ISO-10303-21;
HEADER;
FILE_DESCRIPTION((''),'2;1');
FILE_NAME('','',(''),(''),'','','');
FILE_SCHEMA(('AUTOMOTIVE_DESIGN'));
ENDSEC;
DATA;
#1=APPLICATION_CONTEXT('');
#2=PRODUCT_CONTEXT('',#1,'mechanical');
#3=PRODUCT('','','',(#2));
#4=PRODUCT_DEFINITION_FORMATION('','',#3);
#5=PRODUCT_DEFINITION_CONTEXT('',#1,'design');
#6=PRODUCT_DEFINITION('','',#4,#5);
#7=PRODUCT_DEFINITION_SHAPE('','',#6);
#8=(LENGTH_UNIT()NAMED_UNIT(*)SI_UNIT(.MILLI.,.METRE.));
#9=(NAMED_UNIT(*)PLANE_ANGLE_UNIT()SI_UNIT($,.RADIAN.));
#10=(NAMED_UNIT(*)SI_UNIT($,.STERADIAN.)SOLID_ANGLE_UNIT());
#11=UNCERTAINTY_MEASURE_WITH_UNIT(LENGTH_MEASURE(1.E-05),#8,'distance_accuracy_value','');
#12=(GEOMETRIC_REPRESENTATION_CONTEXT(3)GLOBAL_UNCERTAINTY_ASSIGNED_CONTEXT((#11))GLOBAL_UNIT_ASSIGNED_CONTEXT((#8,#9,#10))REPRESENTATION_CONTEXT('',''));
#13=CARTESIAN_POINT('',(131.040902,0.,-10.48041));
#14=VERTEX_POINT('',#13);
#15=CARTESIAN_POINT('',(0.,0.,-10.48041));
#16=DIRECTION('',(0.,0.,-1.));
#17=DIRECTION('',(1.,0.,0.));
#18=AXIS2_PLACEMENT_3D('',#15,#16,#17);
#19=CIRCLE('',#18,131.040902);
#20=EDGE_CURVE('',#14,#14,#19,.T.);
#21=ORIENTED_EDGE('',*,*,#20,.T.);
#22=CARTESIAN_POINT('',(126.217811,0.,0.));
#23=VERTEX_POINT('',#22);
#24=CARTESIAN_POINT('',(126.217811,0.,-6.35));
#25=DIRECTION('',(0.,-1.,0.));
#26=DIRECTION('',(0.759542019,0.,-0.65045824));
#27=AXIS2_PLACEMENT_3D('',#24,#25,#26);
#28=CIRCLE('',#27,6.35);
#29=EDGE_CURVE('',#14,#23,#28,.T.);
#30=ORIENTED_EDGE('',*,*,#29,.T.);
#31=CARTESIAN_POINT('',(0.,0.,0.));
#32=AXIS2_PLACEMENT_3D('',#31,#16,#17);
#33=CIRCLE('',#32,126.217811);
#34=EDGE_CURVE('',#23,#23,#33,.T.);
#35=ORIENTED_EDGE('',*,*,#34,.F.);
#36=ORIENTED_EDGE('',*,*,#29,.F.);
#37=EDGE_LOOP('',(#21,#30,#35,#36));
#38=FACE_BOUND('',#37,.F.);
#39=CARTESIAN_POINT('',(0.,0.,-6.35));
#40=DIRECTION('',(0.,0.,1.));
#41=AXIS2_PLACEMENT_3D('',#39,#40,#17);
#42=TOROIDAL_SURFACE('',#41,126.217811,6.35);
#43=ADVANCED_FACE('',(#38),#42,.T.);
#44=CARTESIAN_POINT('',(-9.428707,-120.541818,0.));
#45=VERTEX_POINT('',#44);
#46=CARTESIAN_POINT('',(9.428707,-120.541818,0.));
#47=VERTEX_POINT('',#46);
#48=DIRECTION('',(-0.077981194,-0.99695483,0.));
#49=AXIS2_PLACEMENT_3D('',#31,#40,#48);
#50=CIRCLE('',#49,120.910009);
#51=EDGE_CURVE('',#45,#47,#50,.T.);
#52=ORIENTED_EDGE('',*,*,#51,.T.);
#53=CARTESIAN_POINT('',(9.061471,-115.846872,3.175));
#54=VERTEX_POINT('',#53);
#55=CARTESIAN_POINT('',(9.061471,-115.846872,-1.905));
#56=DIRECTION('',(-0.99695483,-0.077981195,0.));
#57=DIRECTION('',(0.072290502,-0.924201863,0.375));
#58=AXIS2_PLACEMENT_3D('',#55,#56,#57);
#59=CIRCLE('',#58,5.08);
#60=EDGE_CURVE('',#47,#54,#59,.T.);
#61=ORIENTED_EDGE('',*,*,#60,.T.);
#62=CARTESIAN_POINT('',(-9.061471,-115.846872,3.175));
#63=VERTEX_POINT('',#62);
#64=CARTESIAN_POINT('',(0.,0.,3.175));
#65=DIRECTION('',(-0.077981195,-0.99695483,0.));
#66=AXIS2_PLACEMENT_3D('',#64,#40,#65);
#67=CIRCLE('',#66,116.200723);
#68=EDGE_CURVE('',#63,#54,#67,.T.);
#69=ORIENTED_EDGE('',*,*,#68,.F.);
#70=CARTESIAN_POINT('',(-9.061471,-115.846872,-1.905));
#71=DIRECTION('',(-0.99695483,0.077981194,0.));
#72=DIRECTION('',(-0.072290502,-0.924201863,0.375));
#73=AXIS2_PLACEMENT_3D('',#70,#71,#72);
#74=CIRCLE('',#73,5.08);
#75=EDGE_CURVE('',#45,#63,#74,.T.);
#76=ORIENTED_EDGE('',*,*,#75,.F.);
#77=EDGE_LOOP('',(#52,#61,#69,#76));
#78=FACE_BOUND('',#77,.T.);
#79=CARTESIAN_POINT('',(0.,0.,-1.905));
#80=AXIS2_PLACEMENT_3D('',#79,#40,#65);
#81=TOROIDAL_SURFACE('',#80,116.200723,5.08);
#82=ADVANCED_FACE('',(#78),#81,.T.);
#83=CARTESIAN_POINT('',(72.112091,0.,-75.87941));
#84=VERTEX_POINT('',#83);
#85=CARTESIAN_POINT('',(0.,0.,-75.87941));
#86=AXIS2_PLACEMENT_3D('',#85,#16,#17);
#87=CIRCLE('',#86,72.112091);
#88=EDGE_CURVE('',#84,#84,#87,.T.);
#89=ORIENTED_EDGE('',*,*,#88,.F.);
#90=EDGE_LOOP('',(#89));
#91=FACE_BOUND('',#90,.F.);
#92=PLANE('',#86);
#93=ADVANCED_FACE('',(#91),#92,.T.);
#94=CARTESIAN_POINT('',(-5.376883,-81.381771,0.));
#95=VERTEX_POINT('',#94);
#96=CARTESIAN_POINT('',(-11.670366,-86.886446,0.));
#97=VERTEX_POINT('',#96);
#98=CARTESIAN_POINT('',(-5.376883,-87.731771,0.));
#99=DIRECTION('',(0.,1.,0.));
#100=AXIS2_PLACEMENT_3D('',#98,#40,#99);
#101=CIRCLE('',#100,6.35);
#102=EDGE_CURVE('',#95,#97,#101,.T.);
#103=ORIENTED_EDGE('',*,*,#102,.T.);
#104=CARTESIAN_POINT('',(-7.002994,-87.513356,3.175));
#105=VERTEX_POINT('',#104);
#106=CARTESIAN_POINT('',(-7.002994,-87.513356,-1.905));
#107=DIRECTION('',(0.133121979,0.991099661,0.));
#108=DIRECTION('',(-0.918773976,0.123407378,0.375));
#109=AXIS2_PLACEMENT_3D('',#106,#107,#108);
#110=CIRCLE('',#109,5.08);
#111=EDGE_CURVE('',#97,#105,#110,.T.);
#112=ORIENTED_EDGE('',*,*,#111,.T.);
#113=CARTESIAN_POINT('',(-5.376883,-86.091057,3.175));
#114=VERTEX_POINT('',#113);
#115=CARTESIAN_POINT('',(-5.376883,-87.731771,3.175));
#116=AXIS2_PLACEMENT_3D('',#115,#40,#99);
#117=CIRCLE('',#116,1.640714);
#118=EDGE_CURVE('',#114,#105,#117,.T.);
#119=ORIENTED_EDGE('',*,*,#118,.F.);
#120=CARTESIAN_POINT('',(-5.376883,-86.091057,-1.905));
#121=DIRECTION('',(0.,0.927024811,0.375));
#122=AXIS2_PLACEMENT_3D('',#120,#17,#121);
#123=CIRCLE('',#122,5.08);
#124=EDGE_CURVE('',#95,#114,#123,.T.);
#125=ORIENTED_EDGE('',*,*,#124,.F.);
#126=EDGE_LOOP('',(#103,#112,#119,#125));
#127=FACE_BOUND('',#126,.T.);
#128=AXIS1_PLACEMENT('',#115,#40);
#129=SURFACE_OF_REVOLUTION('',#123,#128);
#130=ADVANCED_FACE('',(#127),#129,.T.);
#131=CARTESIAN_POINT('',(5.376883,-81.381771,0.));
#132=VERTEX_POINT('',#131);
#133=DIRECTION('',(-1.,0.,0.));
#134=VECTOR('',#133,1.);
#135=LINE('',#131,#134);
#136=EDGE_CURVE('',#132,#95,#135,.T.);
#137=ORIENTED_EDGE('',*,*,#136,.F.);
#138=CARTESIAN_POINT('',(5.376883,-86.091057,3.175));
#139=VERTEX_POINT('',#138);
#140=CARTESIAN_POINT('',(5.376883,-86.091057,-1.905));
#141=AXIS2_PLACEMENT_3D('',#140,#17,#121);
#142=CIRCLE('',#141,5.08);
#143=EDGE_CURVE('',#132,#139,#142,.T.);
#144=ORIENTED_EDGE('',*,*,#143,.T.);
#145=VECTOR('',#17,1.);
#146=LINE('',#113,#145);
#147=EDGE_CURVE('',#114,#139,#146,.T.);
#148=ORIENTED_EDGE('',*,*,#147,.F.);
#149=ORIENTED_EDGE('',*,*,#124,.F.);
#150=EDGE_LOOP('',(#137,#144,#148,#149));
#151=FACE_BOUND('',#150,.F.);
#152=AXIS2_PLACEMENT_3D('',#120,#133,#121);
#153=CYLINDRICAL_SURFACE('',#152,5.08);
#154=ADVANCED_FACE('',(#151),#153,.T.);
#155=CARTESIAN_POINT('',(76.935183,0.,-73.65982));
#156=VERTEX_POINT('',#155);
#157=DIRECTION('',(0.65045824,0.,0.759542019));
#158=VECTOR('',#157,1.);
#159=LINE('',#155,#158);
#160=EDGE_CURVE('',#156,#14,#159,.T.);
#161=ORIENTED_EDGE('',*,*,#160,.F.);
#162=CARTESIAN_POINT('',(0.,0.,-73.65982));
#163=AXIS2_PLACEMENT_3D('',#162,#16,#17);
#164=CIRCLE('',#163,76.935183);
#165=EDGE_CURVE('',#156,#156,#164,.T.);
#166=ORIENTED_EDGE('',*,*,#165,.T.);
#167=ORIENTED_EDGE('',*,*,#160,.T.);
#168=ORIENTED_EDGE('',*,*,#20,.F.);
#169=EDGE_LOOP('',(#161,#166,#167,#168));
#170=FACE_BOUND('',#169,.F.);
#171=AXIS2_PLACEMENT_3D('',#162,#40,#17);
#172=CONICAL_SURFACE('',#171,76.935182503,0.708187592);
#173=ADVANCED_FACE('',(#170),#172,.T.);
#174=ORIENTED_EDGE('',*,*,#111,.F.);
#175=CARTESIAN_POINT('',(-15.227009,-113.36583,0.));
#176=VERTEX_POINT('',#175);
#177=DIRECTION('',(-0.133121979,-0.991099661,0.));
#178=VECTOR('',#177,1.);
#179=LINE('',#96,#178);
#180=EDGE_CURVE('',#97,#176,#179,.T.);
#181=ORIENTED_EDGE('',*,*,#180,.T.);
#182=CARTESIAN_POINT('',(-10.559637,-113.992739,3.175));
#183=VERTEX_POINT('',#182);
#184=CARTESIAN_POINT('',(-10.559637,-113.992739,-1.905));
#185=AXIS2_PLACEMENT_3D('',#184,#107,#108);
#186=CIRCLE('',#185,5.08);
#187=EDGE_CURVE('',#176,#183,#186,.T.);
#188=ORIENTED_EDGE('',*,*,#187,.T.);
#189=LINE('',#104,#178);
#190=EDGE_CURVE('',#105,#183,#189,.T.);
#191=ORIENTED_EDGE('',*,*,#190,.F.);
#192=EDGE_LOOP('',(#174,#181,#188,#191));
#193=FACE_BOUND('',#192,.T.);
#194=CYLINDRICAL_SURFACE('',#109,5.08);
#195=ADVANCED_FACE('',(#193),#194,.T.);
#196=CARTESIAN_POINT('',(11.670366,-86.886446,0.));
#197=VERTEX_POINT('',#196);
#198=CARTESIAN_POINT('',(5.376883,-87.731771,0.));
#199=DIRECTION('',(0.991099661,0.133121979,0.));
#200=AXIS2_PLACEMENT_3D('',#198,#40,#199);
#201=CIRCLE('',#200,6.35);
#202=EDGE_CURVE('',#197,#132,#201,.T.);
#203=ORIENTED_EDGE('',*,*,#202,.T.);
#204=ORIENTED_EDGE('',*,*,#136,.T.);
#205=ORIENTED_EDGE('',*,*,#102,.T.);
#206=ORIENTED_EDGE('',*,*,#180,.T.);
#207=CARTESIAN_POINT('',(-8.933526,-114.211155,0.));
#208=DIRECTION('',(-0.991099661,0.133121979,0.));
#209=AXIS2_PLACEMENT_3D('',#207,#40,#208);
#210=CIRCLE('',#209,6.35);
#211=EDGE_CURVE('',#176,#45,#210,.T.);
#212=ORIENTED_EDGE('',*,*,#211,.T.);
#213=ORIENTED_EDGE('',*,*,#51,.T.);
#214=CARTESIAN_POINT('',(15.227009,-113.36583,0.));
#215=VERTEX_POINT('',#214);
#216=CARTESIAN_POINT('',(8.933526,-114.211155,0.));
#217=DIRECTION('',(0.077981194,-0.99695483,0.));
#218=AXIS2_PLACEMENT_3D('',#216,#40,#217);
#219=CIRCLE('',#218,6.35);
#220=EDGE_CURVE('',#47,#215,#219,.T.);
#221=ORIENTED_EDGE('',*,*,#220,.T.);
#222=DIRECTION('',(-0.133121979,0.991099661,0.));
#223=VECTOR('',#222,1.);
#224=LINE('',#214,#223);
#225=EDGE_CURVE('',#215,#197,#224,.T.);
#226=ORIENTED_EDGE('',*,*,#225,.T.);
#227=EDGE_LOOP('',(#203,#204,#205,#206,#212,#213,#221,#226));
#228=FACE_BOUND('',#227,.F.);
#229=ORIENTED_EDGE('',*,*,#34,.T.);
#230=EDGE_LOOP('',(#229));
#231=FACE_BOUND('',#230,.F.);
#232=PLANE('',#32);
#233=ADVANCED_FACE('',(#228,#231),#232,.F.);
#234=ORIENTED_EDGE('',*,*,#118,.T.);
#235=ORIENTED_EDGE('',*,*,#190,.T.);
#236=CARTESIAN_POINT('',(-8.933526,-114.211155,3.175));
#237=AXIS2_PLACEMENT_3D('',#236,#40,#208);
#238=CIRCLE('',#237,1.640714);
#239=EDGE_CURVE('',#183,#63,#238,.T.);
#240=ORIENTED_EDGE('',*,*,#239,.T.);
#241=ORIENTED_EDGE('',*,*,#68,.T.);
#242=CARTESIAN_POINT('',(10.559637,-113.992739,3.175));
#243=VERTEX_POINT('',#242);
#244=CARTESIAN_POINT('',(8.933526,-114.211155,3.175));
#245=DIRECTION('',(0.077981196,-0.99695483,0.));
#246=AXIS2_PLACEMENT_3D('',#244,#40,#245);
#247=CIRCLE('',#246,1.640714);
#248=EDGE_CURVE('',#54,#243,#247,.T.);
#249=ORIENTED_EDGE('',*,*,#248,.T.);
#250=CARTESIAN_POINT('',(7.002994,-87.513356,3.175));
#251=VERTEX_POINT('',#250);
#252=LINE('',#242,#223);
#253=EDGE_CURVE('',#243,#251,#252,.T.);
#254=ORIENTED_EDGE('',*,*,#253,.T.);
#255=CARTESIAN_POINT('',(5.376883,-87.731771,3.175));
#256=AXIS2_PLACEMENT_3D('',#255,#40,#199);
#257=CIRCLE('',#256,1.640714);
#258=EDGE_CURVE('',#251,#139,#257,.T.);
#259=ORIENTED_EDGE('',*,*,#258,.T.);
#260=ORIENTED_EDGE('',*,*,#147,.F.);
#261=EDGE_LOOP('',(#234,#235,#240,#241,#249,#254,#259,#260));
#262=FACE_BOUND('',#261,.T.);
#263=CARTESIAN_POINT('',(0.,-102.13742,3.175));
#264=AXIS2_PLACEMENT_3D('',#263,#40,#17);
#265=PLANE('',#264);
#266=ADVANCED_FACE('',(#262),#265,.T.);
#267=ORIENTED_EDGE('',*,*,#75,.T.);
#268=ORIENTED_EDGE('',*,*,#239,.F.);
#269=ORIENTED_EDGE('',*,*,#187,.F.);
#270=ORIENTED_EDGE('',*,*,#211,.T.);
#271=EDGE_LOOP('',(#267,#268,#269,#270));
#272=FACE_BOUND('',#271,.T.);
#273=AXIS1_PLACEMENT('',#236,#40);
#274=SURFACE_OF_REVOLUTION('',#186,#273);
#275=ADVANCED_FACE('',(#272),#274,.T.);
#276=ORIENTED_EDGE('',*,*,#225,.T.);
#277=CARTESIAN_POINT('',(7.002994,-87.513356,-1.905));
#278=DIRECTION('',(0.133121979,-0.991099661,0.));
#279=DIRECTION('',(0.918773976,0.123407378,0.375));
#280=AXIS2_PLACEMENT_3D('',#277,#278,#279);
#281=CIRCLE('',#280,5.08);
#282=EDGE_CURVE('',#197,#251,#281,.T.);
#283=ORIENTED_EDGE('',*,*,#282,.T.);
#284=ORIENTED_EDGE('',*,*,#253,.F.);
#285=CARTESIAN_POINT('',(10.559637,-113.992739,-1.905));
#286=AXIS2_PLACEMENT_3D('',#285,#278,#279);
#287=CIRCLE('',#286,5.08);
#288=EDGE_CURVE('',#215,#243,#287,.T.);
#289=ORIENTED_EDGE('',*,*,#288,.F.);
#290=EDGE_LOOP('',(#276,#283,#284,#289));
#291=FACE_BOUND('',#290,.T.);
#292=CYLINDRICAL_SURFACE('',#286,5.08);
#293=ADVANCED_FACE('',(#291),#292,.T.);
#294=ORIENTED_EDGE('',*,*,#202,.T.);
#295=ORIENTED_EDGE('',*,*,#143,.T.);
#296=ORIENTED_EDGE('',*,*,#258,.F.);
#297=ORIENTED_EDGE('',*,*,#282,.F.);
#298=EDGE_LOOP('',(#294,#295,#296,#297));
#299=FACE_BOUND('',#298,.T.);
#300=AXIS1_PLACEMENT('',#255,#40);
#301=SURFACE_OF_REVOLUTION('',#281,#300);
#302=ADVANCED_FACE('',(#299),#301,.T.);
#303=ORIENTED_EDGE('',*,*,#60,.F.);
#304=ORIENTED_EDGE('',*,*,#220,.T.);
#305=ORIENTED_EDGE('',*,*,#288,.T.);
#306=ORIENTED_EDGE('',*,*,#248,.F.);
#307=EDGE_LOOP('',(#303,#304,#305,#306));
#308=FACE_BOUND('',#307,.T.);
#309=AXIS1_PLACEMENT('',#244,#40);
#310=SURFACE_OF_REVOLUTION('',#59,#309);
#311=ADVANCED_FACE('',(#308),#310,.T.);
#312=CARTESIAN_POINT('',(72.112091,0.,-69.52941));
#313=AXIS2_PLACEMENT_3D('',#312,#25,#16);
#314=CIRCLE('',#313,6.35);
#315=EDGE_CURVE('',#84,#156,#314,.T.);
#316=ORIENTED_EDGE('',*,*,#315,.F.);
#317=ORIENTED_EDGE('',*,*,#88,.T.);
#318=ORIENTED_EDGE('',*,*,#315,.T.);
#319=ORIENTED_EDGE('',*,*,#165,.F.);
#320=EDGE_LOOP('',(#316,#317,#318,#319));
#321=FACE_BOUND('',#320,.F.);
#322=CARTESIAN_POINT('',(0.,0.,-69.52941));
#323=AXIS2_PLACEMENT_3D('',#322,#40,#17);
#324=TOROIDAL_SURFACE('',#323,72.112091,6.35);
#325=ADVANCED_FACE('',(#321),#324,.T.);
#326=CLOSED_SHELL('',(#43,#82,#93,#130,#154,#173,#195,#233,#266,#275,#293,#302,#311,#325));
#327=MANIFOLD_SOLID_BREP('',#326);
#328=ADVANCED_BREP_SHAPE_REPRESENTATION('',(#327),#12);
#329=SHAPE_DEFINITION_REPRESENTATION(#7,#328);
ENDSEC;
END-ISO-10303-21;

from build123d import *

# Parameters (mm, degrees)
F3_DEPTH     = 3.175
F4_T1_DEPTH  = 26.7171757075
F4_T3_DEPTH  = 10.7537660931
F4_T5_DEPTH  = 26.7171757075
F4_T8_ANGLE  = 93.1775029202
F4_T10_ANGLE = 82.3499629572
F4_T12_ANGLE = 82.3499629572
F4_T14_ANGLE = 93.1775029202
F4_T16_ANGLE = 8.9450682453


# Not quite as in the source:
# - a fillet or chamfer that OpenCascade refuses, or shapes differently, is made with other operations: its cross-section is extruded or revolved along the edge and cut away or added


with BuildPart() as f1:
    # F0 (on Front) → F1 (revolve)
    with BuildSketch(Plane.XZ):
        with BuildLine():
            Line((126.2178106584, 0), (0, 0))
            Line((0, 0), (0, -75.8794099092))
            Line((0, -75.8794099092), (72.1120906848, -75.8794099092))
            ThreePointArc((72.1120906848, -75.8794099092), (74.7667467473, -75.2978846808), (76.9351825033, -73.6598197328))
            Line((76.9351825033, -73.6598197328), (131.0409024769, -10.4804098236))
            ThreePointArc((131.0409024769, -10.4804098236), (131.98628543, -3.6953439375), (126.2178106584, 0))
        make_face()
    revolve(axis=Axis((0, 0, -37.9397049546), (0, 0, -1)))

    # F2 (on face) → F3 (join)
    with BuildSketch(Plane.XY):
        with BuildLine():
            Line((15.2270092071, -113.3658299561), (11.6703658958, -86.8864461614))
            ThreePointArc((11.6703658958, -86.8864461614), (9.5574744515, -82.9521101243), (5.3768830466, -81.3817707299))
            Line((5.3768830466, -81.3817707299), (0, -81.3817707299))
            Line((0, -81.3817707299), (-5.3768830466, -81.3817707299))
            ThreePointArc((-5.3768830466, -81.3817707299), (-9.5574744515, -82.9521101243), (-11.6703658958, -86.8864461614))
            Line((-11.6703658958, -86.8864461614), (-15.2270092071, -113.3658299561))
            ThreePointArc((-15.2270092071, -113.3658299561), (-13.8726748488, -118.2020582047), (-9.4287069428, -120.5418176958))
            ThreePointArc((-9.4287069428, -120.5418176958), (0, -120.9100092136), (9.4287069428, -120.5418176958))
            ThreePointArc((9.4287069428, -120.5418176958), (13.8726748488, -118.2020582047), (15.2270092071, -113.3658299561))
        make_face()
    extrude(amount=F3_DEPTH)

    # F4: fillet of radius 5.08 on 1 edges, made by hand

    # F4_s2 → F4_t1 (cut)
    with BuildSketch(Plane(origin=(15.2270092071, -113.3658299561, 0), x_dir=(0, 0, 1), z_dir=(-0.1331219793, 0.9910996613, 0))):
        with BuildLine():
            ThreePointArc((0, 0), (2.3071134838, -1.8694797079), (3.175, -4.7092860393))
            Line((3.175, -4.7092860393), (3.175, 0))
            Line((3.175, 0), (0, 0))
        make_face()
    extrude(amount=F4_T1_DEPTH, mode=Mode.SUBTRACT)

    # F4_s4 → F4_t3 (cut)
    with BuildSketch(Plane.YZ.offset(-5.3768830466)):
        with BuildLine():
            ThreePointArc((-81.3817707299, 0), (-83.2512504378, 2.3071134838), (-86.0910567692, 3.175))
            Line((-86.0910567692, 3.175), (-81.3817707299, 3.175))
            Line((-81.3817707299, 3.175), (-81.3817707299, 0))
        make_face()
    extrude(amount=F4_T3_DEPTH, mode=Mode.SUBTRACT)

    # F4_s6 → F4_t5 (cut)
    with BuildSketch(Plane(origin=(-11.6703658958, -86.8864461614, 0), x_dir=(0, 0, 1), z_dir=(-0.1331219793, -0.9910996613, 0))):
        with BuildLine():
            ThreePointArc((0, 0), (2.3071134838, -1.8694797079), (3.175, -4.7092860393))
            Line((3.175, -4.7092860393), (3.175, 0))
            Line((3.175, 0), (0, 0))
        make_face()
    extrude(amount=F4_T5_DEPTH, mode=Mode.SUBTRACT)

    # F4_s7 → F4_t8 (revolve, cut)
    with BuildSketch(Plane(origin=(0, 0, 0), x_dir=(0, 0, 1), z_dir=(-0.9969548301, -0.0779811945, 0))):
        with BuildLine():
            ThreePointArc((0, -120.9100092136), (2.3071134838, -119.0405295057), (3.175, -116.2007231743))
            Line((3.175, -116.2007231743), (3.175, -120.9100092136))
            Line((3.175, -120.9100092136), (0, -120.9100092136))
        make_face()
    revolve(axis=Axis((8.9335263578, -114.2111545246, 3.175), (0, 0, 1)), revolution_arc=F4_T8_ANGLE, mode=Mode.SUBTRACT)

    # F4_s9 → F4_t10 (revolve, cut)
    with BuildSketch(Plane(origin=(11.6703658958, -86.8864461614, 0), x_dir=(0, 0, 1), z_dir=(0.1331219793, -0.9910996613, 0))):
        with BuildLine():
            ThreePointArc((0, 0), (2.3071134838, 1.8694797079), (3.175, 4.7092860393))
            Line((3.175, 4.7092860393), (3.175, 0))
            Line((3.175, 0), (0, 0))
        make_face()
    revolve(axis=Axis((5.3768830466, -87.7317707299, 3.175), (0, 0, 1)), revolution_arc=F4_T10_ANGLE, mode=Mode.SUBTRACT)

    # F4_s11 → F4_t12 (revolve, cut)
    with BuildSketch(Plane.YZ.offset(-5.3768830466)):
        with BuildLine():
            ThreePointArc((-81.3817707299, 0), (-83.2512504378, 2.3071134838), (-86.0910567692, 3.175))
            Line((-86.0910567692, 3.175), (-81.3817707299, 3.175))
            Line((-81.3817707299, 3.175), (-81.3817707299, 0))
        make_face()
    revolve(axis=Axis((-5.3768830466, -87.7317707299, 3.175), (0, 0, 1)), revolution_arc=F4_T12_ANGLE, mode=Mode.SUBTRACT)

    # F4_s13 → F4_t14 (revolve, cut)
    with BuildSketch(Plane(origin=(-15.2270092071, -113.3658299561, 0), x_dir=(0, 0, 1), z_dir=(0.1331219793, 0.9910996613, 0))):
        with BuildLine():
            ThreePointArc((0, 0), (2.3071134838, 1.8694797079), (3.175, 4.7092860393))
            Line((3.175, 4.7092860393), (3.175, 0))
            Line((3.175, 0), (0, 0))
        make_face()
    revolve(axis=Axis((-8.9335263578, -114.2111545246, 3.175), (0, 0, 1)), revolution_arc=F4_T14_ANGLE, mode=Mode.SUBTRACT)

    # F4_s15 → F4_t16 (revolve, cut)
    with BuildSketch(Plane(origin=(0, 0, 0), x_dir=(0, 0, 1), z_dir=(-0.9969548301, 0.0779811945, 0))):
        with BuildLine():
            ThreePointArc((0, -120.9100092136), (2.3071134838, -119.0405295057), (3.175, -116.2007231743))
            Line((3.175, -116.2007231743), (3.175, -120.9100092136))
            Line((3.175, -120.9100092136), (0, -120.9100092136))
        make_face()
    revolve(axis=Axis((0, 0, 3.175), (0, 0, 1)), revolution_arc=F4_T16_ANGLE, mode=Mode.SUBTRACT)


solid = f1.part
